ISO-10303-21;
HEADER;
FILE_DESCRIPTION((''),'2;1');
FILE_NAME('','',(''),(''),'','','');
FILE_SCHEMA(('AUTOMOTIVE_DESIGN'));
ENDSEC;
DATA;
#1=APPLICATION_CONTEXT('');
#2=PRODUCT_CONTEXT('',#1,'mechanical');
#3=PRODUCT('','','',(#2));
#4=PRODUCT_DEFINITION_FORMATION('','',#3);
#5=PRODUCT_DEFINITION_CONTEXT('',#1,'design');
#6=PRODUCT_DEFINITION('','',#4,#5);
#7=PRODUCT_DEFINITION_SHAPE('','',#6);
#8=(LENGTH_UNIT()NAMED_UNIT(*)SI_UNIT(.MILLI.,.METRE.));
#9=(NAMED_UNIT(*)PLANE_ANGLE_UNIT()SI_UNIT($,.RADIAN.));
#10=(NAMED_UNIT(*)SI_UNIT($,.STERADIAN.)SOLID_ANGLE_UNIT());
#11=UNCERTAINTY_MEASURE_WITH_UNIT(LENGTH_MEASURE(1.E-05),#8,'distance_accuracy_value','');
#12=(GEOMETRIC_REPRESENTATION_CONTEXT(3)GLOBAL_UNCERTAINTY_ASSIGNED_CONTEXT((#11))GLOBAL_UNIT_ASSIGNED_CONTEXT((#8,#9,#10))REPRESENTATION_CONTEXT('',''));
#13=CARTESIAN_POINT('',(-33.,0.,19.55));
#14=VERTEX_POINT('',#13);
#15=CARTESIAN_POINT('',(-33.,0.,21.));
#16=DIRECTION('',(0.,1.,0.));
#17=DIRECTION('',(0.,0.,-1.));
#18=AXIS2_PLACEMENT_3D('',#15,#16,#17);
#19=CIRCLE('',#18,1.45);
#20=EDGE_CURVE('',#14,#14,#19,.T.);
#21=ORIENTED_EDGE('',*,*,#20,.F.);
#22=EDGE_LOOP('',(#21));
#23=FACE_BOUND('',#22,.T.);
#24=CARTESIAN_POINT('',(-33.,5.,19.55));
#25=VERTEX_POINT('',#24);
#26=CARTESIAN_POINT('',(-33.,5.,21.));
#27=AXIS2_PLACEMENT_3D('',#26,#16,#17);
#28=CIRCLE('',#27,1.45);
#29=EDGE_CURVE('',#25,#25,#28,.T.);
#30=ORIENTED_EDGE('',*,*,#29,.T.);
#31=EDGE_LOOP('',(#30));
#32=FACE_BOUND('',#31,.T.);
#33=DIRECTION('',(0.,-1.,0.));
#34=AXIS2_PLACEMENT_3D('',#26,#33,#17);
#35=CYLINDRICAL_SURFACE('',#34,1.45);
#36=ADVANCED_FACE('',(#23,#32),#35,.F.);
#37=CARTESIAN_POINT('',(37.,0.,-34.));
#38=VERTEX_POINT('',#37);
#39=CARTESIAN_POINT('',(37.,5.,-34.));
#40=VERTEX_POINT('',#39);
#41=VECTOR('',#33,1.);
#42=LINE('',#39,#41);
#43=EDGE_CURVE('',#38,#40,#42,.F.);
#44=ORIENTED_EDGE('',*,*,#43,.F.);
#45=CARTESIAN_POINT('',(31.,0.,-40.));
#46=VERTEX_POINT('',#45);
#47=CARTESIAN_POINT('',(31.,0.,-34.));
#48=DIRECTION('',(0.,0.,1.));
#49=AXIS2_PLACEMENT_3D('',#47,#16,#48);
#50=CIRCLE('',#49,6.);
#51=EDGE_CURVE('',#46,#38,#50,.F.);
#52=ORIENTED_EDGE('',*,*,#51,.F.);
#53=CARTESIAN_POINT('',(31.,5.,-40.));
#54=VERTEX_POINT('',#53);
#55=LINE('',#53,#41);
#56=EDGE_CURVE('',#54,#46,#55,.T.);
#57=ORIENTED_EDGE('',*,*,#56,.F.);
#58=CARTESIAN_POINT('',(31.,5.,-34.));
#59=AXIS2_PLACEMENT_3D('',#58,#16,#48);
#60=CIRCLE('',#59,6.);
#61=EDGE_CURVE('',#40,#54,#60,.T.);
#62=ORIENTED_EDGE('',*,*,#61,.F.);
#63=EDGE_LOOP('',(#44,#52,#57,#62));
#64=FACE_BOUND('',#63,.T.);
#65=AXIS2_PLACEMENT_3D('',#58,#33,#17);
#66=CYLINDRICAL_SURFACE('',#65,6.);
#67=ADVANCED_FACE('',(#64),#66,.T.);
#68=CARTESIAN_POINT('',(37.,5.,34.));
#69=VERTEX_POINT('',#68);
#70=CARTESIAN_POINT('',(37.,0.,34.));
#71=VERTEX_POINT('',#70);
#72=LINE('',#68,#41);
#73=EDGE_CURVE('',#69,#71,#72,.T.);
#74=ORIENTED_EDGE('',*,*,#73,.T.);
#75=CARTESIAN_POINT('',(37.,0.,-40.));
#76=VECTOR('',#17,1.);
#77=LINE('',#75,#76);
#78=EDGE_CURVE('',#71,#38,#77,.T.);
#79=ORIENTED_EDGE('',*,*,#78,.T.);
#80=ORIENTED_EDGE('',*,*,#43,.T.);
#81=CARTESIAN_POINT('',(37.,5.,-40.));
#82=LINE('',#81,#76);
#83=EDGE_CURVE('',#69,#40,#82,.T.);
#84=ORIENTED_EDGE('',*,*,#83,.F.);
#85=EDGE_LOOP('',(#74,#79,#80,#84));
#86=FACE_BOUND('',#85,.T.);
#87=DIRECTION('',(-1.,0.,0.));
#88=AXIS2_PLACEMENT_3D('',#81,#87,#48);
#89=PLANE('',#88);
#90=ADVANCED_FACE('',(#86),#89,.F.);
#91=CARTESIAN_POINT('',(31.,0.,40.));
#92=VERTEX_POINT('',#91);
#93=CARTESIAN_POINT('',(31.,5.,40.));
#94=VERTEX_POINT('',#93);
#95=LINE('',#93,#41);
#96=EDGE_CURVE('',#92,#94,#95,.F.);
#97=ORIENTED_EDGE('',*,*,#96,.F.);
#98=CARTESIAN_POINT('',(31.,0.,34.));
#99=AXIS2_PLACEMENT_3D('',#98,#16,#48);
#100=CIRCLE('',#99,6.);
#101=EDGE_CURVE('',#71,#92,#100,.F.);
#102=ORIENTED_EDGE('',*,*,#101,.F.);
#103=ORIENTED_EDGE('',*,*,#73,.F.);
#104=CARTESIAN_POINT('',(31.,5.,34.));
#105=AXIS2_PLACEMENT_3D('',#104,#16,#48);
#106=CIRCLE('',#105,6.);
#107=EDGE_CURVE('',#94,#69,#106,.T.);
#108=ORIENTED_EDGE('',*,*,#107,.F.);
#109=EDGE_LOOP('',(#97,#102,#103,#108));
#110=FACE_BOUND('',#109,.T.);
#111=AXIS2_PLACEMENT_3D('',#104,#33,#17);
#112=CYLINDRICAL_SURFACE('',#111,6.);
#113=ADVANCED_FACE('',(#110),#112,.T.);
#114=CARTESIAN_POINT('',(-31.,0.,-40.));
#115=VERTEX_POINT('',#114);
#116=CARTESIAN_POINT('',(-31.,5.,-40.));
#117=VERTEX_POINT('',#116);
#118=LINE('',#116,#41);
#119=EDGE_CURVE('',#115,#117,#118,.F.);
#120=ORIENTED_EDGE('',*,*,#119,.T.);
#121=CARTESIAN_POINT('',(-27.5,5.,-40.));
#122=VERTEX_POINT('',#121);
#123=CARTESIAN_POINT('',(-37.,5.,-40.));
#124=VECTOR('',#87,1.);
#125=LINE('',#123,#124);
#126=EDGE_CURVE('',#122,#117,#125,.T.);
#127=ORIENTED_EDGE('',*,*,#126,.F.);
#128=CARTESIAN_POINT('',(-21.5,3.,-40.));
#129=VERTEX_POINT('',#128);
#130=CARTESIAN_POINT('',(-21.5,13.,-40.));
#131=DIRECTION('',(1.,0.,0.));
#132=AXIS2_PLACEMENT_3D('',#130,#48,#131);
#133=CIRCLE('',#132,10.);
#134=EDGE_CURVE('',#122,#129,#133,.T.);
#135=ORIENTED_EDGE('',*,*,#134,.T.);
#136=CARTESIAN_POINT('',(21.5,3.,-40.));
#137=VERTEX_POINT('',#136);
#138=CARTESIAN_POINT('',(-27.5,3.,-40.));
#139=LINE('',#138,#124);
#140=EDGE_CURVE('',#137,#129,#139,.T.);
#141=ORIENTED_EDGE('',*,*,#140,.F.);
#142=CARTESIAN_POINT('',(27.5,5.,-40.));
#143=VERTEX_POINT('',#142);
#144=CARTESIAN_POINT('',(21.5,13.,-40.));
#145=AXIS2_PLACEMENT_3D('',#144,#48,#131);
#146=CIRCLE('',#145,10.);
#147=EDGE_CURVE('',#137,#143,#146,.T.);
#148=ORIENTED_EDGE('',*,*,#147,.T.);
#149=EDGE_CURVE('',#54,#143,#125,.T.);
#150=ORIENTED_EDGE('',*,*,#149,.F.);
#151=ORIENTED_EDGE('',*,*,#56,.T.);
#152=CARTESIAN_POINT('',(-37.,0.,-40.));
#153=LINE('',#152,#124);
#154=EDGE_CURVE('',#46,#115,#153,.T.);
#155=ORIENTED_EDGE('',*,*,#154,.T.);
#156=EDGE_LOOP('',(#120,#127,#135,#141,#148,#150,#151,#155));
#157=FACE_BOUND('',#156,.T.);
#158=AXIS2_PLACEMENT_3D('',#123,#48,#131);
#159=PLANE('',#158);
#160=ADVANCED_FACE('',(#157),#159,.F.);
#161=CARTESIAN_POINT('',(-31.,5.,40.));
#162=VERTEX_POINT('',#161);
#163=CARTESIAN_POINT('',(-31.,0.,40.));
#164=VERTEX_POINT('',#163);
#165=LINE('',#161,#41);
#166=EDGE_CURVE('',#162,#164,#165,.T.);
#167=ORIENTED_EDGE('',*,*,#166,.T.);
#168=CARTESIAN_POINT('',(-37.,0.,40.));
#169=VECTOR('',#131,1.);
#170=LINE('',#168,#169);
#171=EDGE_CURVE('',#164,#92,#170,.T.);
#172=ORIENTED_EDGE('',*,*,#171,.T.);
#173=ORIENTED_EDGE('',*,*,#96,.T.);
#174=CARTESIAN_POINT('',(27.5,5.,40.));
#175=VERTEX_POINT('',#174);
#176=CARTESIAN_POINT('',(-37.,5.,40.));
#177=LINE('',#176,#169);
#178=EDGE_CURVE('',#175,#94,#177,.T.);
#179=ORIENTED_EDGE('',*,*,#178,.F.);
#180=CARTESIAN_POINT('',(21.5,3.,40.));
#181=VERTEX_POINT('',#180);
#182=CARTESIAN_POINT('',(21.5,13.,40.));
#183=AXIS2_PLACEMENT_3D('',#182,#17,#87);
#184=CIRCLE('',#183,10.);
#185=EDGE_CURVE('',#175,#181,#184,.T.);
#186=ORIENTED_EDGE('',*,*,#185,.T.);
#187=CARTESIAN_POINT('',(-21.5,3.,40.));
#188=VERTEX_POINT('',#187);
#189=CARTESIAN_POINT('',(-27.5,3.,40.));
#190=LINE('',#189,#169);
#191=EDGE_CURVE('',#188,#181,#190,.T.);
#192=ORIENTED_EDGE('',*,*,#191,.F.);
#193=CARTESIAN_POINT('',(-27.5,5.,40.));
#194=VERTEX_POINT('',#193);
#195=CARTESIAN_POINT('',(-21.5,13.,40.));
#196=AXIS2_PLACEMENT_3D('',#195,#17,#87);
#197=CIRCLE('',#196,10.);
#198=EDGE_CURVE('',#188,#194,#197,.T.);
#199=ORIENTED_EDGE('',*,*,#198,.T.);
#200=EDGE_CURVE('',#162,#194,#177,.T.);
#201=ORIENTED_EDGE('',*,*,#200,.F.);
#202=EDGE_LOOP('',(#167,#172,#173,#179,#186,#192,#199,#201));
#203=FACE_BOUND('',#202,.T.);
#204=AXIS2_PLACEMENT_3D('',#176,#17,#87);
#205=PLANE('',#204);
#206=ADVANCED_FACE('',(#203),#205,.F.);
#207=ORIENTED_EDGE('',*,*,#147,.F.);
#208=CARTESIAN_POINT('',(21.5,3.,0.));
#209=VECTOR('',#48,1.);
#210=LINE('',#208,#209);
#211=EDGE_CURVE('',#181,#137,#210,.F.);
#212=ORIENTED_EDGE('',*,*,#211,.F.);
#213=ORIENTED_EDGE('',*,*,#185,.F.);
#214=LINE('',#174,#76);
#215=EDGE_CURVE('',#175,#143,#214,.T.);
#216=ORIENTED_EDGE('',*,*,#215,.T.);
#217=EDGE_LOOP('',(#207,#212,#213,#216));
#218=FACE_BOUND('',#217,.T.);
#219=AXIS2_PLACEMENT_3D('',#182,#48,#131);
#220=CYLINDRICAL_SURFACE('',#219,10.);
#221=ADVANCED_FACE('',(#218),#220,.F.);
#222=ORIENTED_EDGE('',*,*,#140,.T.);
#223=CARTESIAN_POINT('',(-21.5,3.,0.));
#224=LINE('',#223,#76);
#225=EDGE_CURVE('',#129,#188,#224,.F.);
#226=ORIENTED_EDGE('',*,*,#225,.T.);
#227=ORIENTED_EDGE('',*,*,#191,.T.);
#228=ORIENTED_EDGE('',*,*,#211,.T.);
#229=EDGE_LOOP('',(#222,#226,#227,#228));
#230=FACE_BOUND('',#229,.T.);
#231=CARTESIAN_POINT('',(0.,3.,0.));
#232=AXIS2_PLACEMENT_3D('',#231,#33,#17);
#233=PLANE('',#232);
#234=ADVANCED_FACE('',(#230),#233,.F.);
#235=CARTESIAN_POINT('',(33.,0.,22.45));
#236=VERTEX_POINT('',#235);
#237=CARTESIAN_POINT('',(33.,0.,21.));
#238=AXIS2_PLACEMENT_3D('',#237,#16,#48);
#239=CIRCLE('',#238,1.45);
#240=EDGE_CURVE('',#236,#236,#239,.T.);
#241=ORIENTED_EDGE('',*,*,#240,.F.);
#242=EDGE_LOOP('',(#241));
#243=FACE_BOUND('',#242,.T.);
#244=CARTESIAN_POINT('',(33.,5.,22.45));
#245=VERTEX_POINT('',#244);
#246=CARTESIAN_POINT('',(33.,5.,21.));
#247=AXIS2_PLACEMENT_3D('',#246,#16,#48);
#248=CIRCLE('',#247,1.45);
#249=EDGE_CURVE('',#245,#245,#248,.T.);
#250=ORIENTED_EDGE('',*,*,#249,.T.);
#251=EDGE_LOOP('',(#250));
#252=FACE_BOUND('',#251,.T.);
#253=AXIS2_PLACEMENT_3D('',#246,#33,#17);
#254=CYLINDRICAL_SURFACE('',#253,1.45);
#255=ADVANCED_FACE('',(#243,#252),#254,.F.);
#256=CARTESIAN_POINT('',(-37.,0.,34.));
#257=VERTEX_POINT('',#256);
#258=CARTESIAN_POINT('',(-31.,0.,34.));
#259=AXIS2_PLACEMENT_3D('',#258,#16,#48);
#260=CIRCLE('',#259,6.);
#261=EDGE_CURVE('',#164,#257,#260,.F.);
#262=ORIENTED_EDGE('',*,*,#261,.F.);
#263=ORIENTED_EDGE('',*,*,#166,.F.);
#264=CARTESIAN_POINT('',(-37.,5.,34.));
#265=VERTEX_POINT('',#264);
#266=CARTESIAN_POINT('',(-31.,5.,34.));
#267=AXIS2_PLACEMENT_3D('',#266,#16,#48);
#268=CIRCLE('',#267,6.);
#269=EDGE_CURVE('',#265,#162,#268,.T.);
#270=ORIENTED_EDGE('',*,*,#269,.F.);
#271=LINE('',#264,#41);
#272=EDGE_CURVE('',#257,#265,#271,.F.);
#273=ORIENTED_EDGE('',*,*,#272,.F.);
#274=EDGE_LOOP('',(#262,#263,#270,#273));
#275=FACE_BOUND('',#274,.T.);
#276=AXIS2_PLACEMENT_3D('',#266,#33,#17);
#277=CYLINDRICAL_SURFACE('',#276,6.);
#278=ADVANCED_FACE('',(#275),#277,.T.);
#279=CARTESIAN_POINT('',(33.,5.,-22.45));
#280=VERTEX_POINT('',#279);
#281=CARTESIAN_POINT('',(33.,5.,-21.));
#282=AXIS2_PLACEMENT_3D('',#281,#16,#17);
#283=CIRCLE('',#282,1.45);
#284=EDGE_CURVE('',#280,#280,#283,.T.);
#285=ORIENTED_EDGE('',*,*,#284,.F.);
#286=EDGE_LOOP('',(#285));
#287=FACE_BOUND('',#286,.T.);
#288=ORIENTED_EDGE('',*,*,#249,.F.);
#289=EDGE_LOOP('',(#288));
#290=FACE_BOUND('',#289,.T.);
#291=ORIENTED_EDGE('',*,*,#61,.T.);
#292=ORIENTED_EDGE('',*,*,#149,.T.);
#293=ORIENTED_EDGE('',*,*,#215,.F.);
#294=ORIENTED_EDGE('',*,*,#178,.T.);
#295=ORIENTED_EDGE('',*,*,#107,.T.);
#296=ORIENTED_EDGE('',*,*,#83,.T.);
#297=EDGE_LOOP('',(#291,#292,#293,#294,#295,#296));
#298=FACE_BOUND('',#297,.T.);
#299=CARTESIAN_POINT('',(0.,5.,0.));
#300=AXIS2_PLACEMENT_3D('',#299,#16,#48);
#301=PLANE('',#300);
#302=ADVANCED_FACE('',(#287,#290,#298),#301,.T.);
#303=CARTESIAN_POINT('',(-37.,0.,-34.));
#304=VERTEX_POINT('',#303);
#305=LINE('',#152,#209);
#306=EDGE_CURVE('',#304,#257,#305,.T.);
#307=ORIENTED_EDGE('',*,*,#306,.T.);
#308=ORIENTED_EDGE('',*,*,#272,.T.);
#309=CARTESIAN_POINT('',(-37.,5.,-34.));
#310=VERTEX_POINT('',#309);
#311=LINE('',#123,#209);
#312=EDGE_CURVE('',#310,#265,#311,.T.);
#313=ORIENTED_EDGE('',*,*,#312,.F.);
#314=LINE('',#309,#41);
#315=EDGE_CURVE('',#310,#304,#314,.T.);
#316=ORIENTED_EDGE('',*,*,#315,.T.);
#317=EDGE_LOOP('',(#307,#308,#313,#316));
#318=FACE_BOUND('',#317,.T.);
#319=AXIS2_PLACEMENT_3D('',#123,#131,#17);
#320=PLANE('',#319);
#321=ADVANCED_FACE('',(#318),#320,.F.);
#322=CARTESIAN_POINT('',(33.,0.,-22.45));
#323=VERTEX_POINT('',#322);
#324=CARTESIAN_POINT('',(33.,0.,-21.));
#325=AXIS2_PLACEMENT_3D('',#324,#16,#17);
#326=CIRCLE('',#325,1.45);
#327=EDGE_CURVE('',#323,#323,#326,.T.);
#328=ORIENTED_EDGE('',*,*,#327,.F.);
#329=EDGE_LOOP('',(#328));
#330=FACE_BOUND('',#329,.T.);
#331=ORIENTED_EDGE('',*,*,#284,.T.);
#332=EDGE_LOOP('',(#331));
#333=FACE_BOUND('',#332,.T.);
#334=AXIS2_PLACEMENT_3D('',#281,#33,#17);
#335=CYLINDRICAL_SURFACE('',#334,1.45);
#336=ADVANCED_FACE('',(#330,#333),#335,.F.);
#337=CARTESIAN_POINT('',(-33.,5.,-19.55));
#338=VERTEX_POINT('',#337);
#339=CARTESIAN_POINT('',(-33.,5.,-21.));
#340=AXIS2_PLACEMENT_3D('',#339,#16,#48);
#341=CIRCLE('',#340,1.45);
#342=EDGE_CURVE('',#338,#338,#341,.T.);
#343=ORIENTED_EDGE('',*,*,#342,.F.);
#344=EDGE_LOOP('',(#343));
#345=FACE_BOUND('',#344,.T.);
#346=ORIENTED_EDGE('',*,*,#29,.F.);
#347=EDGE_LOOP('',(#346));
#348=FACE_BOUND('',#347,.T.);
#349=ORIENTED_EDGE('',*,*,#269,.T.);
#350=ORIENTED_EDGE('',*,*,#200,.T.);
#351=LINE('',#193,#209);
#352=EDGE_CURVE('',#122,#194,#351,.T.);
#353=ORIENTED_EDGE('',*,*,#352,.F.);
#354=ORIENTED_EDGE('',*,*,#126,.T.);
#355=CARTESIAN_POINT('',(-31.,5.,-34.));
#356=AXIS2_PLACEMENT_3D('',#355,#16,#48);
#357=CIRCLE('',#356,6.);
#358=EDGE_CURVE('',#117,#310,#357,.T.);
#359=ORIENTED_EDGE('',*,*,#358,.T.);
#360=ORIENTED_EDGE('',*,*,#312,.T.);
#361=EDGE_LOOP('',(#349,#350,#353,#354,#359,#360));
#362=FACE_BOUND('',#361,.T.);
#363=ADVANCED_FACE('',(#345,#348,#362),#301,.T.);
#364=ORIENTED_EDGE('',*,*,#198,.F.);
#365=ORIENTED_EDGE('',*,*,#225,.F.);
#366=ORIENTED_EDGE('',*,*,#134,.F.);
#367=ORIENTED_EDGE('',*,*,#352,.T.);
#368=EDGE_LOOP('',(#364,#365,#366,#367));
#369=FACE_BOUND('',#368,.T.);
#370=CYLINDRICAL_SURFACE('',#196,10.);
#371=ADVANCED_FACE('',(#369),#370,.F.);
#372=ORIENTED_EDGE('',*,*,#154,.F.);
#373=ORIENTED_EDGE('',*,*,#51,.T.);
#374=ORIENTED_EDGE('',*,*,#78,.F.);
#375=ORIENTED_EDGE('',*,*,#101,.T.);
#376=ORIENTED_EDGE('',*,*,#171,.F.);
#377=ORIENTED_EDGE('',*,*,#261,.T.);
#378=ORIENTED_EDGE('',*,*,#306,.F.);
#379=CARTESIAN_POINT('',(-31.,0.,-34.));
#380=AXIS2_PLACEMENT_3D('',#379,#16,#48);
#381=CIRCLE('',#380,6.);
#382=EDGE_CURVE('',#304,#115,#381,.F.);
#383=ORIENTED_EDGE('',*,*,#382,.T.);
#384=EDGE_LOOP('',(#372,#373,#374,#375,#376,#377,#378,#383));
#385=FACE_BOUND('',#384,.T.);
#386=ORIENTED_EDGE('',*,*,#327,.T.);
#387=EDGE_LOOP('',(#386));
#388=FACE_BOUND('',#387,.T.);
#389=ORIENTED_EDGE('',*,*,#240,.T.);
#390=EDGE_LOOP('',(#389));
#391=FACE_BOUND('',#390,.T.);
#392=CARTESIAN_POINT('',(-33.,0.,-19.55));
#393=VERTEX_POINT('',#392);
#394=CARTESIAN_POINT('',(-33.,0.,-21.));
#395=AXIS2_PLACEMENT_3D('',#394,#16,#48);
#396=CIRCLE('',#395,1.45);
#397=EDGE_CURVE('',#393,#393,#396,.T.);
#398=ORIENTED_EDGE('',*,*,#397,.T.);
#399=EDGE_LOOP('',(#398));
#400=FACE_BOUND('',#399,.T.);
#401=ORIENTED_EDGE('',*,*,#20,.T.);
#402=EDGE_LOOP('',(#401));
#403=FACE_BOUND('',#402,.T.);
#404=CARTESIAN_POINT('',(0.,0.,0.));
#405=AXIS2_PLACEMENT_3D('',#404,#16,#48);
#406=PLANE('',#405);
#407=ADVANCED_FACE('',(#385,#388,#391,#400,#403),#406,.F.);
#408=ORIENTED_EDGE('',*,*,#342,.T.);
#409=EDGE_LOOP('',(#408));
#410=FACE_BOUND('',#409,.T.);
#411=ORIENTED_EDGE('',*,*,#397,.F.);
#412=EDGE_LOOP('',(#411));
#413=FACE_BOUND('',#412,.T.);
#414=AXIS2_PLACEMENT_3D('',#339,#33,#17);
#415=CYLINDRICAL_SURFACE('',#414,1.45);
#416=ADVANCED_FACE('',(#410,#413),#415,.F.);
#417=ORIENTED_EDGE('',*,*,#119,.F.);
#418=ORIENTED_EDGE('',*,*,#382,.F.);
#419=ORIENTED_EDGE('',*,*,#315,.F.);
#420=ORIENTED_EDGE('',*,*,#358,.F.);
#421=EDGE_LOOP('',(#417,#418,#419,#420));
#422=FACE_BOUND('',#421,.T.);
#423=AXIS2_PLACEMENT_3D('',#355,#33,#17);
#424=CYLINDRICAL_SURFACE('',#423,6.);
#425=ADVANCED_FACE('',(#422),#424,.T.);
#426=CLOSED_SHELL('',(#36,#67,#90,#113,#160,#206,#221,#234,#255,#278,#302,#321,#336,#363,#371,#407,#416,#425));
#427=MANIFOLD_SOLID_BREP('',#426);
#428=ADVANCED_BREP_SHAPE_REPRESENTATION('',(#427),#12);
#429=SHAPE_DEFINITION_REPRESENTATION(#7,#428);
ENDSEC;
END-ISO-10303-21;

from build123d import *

# Parameters (mm, degrees)
SKETCH_1_W          = 74
SKETCH_1_H          = 80
SKETCH_1_R          = 1.45
EXTRUDE_1_DEPTH     = 5
FILLET_1_R          = 6
SKETCH_2_W          = 55
SKETCH_2_H          = 80
CUT_EXTRUDE_1_DEPTH = 2
FILLET_2_R          = 10


with BuildPart() as part:
    # 草图1 → 凸台-拉伸1 (new body)
    with BuildSketch(Plane(origin=(0, 0, 0), x_dir=(1, 0, 0), z_dir=(0, 1, 0))):
        Rectangle(SKETCH_1_W, SKETCH_1_H)
        with Locations(Location((-33, 21, 0), (0, 0, 270))):
            Circle(SKETCH_1_R, mode=Mode.SUBTRACT)
        with Locations(Location((-33, -21, 0), (0, 0, 90))):
            Circle(SKETCH_1_R, mode=Mode.SUBTRACT)
        with Locations(Location((33, -21, 0), (0, 0, 270))):
            Circle(SKETCH_1_R, mode=Mode.SUBTRACT)
        with Locations(Location((33, 21, 0), (0, 0, 90))):
            Circle(SKETCH_1_R, mode=Mode.SUBTRACT)
    extrude(amount=EXTRUDE_1_DEPTH)

    # 圆角1
    fillet_1_edges = [part.edges().sort_by_distance(p)[0] for p in [
        (37, 2.5, 40),
        (-37, 2.5, 40),
        (-37, 2.5, -40),
        (37, 2.5, -40),
    ]]
    fillet(fillet_1_edges, radius=FILLET_1_R)

    # 草图2 → 切除-拉伸1 (cut)
    with BuildSketch(Plane(origin=(0, 5, 0), x_dir=(1, 0, 0), z_dir=(0, 1, 0))):
        Rectangle(SKETCH_2_W, SKETCH_2_H)
    extrude(amount=-CUT_EXTRUDE_1_DEPTH, mode=Mode.SUBTRACT)

    # 圆角2
    # the kernel refuses this fillet: 10 mm, written as the material it adds along each edge
    with BuildSketch(Plane(origin=(-27.5, 3, -40), x_dir=(1, 0, 0), z_dir=(0, 0, 1))) as fillet_2_piece_1:
        with BuildLine():
            CenterArc((6, 10), FILLET_2_R, 233.130102354, 36.869897646)
            Line((0, 2), (-0.12, 1.84))
            ThreePointArc((-0.12, 1.84), (-0.2, 1), (-0.2, 0))
            Line((-0.2, 0), (0, -0.2))
            Line((0, -0.2), (6, -0.2))
            Line((6, -0.2), (6, 0))
        make_face()
    extrude(amount=80)
    with BuildSketch(Plane(origin=(27.5, 3, 40), x_dir=(0, 1, 0), z_dir=(0, 0, -1))) as fillet_2_piece_2:
        with BuildLine():
            CenterArc((10, -6), FILLET_2_R, 143.130102354, 36.869897646)
            Line((0, -6), (-0.2, -6))
            Line((-0.2, -6), (-0.2, 0))
            Line((-0.2, 0), (0, 0.2))
            ThreePointArc((0, 0.2), (1, 0.2), (1.84, 0.12))
            Line((1.84, 0.12), (2, 0))
        make_face()
    extrude(amount=80)


solid = part.part
